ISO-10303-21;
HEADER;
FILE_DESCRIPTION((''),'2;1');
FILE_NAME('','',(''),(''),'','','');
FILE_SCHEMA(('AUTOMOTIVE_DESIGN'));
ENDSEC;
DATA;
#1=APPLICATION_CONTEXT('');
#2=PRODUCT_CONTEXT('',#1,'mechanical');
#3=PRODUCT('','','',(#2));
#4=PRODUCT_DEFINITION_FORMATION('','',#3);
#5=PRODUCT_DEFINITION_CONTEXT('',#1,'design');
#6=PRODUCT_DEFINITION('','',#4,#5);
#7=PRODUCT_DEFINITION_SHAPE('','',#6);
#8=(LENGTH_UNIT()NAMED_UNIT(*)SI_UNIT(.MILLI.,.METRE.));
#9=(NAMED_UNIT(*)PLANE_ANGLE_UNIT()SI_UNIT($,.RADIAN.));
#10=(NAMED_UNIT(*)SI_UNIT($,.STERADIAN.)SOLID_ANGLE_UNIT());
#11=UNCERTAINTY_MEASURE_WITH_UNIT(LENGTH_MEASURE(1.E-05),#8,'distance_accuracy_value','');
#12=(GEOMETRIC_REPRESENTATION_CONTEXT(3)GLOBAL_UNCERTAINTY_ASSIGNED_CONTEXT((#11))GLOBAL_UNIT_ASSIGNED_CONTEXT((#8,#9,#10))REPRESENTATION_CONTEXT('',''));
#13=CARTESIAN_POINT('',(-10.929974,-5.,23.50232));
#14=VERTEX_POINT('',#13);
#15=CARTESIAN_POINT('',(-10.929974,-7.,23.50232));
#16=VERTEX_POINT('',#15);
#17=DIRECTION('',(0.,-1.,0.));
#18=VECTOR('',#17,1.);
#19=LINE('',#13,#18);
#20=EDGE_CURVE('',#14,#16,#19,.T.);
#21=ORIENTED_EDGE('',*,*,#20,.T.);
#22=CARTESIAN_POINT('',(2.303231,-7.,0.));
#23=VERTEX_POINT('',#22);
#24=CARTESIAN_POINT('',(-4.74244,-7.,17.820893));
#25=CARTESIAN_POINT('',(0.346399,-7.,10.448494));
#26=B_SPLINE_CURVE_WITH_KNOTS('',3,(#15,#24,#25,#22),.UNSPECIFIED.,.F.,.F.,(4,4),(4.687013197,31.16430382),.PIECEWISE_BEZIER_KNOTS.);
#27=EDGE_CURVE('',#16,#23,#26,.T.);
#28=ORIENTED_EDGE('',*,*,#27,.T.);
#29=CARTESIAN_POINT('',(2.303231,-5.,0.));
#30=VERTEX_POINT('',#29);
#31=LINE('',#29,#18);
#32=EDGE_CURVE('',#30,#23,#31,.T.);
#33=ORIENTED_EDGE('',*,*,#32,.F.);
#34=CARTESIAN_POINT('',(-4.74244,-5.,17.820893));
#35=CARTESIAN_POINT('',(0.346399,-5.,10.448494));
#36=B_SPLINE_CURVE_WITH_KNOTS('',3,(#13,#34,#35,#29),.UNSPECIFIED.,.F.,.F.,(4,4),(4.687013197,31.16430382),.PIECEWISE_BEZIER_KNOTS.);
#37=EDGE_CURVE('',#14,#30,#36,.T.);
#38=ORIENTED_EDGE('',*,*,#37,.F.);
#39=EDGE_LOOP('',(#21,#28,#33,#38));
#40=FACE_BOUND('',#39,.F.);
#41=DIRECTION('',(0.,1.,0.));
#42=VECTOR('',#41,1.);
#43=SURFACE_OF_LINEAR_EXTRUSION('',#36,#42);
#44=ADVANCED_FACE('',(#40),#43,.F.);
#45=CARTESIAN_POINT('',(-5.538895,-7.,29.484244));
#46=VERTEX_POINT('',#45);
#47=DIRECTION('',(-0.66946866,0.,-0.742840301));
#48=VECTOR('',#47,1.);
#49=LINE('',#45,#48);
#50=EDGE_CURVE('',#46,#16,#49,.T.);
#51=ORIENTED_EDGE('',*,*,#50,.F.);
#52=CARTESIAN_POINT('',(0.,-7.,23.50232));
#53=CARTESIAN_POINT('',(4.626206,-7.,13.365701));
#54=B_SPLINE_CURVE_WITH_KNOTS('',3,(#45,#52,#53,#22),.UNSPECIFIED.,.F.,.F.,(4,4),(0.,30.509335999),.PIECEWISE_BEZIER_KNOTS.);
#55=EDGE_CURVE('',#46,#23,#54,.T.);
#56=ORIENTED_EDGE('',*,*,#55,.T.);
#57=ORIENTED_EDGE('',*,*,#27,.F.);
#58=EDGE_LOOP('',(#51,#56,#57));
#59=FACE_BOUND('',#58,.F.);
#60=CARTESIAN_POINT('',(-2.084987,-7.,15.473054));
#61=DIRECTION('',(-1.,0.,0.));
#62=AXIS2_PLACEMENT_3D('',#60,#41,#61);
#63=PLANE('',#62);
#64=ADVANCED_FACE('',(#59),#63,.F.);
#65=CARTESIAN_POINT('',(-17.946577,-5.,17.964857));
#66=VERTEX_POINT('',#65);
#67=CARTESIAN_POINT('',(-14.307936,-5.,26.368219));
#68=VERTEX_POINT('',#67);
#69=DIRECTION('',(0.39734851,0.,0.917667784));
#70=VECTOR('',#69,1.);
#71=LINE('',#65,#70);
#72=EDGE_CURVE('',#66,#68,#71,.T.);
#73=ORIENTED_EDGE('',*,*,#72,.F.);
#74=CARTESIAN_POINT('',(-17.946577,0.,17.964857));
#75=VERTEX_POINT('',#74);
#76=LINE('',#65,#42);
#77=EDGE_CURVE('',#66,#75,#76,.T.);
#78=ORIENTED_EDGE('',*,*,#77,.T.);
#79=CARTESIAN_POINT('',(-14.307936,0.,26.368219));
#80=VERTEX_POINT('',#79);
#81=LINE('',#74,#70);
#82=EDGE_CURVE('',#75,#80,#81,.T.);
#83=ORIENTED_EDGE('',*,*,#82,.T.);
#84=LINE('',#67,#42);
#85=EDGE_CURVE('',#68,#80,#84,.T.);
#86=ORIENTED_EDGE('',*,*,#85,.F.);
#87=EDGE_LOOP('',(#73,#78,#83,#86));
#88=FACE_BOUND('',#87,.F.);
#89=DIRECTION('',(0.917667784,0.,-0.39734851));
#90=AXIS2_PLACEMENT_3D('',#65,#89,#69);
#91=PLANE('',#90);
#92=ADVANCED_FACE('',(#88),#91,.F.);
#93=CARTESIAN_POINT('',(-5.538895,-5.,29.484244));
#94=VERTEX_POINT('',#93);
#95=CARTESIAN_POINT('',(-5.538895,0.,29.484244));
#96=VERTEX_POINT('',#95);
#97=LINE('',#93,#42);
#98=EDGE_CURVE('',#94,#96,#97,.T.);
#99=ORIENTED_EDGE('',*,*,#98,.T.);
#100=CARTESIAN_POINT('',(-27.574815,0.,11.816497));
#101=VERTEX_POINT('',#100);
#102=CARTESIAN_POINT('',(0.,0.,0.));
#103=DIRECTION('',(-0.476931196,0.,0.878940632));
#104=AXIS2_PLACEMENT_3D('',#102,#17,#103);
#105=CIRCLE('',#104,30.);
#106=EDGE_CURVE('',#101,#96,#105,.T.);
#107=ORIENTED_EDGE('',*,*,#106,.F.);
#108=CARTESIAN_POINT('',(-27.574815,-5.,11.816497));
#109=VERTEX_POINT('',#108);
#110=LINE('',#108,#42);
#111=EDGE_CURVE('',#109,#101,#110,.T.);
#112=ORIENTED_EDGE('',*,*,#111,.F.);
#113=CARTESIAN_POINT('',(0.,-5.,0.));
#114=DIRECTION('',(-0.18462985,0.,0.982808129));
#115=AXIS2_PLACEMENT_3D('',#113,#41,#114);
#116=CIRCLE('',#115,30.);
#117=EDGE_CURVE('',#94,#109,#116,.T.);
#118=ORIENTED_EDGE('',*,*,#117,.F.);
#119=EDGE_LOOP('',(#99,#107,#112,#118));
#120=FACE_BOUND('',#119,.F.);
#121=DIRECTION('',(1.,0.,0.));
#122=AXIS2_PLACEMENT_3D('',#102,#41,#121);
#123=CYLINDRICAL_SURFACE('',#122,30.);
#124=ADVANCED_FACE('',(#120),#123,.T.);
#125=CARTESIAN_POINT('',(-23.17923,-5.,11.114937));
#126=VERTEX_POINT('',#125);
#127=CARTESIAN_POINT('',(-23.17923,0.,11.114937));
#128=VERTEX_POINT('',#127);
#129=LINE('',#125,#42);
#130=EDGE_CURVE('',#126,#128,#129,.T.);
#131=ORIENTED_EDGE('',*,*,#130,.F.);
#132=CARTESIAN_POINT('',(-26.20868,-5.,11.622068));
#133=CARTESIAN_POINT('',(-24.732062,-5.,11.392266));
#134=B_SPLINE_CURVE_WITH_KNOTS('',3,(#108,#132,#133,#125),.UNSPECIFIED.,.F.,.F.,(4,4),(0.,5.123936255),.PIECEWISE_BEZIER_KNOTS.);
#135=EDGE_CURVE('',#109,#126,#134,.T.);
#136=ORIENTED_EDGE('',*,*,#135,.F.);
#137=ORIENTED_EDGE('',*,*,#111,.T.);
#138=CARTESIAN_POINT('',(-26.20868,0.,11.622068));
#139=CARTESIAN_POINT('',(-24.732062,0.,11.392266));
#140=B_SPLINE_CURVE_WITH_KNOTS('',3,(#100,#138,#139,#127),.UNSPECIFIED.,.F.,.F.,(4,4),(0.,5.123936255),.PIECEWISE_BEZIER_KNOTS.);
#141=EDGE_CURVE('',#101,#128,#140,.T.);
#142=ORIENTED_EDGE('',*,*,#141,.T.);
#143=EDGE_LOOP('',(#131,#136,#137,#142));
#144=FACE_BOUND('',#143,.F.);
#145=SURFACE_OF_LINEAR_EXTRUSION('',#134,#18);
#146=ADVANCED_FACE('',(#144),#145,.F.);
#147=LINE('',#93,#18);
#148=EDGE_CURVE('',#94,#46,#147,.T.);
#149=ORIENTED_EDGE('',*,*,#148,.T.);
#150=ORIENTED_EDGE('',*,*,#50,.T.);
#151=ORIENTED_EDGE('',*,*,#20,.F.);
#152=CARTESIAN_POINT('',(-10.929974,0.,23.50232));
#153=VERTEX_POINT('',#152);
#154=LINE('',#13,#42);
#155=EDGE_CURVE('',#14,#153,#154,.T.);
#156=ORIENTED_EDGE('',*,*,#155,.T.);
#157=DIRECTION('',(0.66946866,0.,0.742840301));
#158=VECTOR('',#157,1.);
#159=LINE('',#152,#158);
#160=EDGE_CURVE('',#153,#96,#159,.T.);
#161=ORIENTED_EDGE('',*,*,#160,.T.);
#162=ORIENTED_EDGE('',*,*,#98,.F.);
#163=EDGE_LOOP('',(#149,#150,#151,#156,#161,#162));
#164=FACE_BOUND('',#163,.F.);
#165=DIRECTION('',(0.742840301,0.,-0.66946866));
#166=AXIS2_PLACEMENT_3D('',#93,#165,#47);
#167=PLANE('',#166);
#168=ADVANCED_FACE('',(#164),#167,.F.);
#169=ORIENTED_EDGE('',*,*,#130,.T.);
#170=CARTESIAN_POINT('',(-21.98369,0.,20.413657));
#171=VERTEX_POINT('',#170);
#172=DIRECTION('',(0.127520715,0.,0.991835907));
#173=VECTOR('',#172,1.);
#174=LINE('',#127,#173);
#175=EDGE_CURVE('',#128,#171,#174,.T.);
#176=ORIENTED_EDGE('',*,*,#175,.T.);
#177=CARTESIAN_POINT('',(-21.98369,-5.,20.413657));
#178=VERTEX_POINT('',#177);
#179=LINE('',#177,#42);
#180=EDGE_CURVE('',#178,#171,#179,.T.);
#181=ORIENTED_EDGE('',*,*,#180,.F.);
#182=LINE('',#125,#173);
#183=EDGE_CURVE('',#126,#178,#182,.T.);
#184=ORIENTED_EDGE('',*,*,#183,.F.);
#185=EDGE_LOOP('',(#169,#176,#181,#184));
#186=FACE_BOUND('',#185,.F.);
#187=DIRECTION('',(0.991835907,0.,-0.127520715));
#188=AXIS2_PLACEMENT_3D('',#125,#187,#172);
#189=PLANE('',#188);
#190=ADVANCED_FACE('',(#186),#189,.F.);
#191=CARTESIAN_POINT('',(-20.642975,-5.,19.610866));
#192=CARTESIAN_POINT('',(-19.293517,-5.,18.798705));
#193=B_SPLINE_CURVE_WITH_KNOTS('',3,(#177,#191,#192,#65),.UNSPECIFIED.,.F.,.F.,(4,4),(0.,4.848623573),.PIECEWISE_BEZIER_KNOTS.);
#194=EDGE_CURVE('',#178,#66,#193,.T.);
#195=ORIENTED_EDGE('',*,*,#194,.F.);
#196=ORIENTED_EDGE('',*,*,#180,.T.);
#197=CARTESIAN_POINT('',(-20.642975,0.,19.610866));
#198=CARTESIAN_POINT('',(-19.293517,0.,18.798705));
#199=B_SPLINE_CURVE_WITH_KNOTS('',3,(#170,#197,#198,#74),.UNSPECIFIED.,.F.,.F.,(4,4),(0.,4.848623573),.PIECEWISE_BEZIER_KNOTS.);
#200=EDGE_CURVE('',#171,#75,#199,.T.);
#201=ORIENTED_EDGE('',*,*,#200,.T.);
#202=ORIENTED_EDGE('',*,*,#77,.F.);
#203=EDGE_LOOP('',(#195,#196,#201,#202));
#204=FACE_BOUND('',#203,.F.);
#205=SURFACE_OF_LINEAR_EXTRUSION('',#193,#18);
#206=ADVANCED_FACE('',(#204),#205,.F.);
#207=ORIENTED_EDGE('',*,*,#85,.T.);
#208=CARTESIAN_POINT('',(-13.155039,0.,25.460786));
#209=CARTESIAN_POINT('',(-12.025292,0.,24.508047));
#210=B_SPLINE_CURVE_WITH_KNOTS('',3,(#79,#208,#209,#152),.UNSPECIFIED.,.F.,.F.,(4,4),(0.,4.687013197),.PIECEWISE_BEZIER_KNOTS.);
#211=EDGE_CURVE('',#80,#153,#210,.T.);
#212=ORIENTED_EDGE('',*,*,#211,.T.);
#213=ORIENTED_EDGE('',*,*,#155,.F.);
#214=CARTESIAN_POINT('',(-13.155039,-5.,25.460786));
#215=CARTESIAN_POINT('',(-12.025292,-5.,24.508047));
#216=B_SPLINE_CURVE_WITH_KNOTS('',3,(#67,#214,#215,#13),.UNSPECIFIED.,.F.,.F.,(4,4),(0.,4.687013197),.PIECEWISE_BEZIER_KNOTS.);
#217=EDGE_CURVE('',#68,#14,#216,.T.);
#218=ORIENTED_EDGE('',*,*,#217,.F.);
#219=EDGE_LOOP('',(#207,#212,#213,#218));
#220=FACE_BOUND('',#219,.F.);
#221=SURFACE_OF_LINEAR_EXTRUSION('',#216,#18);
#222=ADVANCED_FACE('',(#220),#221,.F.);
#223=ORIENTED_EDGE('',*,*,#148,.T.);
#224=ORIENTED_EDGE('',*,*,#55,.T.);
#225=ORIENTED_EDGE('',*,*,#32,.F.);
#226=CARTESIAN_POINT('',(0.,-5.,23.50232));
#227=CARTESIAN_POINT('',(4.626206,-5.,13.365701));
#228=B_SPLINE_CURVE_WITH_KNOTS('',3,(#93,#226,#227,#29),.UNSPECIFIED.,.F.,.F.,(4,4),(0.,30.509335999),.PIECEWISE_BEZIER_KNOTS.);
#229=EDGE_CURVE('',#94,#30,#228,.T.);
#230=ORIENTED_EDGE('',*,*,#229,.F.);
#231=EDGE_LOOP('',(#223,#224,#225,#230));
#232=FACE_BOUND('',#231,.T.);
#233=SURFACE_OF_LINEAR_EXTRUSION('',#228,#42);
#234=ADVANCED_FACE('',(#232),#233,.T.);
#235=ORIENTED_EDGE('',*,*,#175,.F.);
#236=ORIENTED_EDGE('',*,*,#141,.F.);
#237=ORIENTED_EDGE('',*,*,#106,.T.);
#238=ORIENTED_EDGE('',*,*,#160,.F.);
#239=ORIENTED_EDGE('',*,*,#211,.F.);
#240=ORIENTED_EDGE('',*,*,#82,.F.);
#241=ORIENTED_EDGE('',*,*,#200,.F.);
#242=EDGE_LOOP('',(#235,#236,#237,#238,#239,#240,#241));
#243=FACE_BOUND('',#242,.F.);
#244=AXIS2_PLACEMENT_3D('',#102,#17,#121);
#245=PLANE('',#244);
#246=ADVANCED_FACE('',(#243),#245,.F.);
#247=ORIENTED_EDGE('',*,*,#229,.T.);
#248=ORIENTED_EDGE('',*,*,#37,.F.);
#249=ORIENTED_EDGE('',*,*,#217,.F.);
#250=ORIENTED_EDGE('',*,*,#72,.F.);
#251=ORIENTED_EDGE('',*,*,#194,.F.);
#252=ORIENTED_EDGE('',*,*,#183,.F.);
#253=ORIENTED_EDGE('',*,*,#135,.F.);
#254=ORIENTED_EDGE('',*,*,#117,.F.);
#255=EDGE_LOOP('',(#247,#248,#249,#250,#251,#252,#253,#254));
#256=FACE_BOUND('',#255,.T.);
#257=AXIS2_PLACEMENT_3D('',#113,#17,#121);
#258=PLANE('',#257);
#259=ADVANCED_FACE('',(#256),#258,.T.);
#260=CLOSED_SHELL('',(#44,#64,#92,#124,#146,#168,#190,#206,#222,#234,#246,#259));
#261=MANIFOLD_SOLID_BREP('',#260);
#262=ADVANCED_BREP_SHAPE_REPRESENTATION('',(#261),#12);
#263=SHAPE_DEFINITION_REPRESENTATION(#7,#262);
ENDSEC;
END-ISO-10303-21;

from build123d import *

# Parameters (mm, degrees)
F0_R     = 30
F1_DEPTH = 5
F4_DEPTH = 5
F5_DEPTH = 5
F6_DEPTH = 5
F7_DEPTH = 2


with BuildPart() as f1:
    # F0 (on Front) → F1 (new body)
    with BuildSketch(Plane.XZ):
        Circle(F0_R)
    extrude(amount=F1_DEPTH)

    # F3 (on face) → F4 (cut)
    with BuildSketch(Plane.XZ.offset(5)):
        with BuildLine():
            Line((-10.9299741999, 23.5023200512), (-5.5388955, 29.4842438709))
            ThreePointArc((-5.5388955, 29.4842438709), (-10.0449779303, 28.2683288926), (-14.3079358656, 26.3682189627))
            add(Edge.make_bspline(
                [(-14.3079358656, 26.3682189627), (-13.1550391421, 25.4607855158), (-12.0252922437, 24.5080470289), (-10.9299741999, 23.5023200512)],
                knots=[0, 0, 0, 0, 4.6870131966, 4.6870131966, 4.6870131966, 4.6870131966], degree=3))
        make_face()
    extrude(amount=-F4_DEPTH, mode=Mode.SUBTRACT)

    # F3 (on face) → F5 (cut)
    with BuildSketch(Plane.XZ.offset(5)):
        with BuildLine():
            Line((-17.9465766996, 17.9648566991), (-14.3079358656, 26.3682189627))
            ThreePointArc((-14.3079358656, 26.3682189627), (-18.3884401049, 23.7036974016), (-21.9836899596, 20.4136565995))
            add(Edge.make_bspline(
                [(-21.9836899596, 20.4136565995), (-20.642975191, 19.610865703), (-19.293517456, 18.7987052228), (-17.9465766996, 17.9648566991)],
                knots=[0, 0, 0, 0, 4.8486235733, 4.8486235733, 4.8486235733, 4.8486235733], degree=3))
        make_face()
    extrude(amount=-F5_DEPTH, mode=Mode.SUBTRACT)

    # F3 (on face) → F6 (cut)
    with BuildSketch(Plane.XZ.offset(5)):
        with BuildLine():
            Line((-23.1792298082, 11.114937143), (-21.9836899596, 20.4136565995))
            ThreePointArc((-21.9836899596, 20.4136565995), (-25.1493367192, 16.3557593094), (-27.5748147519, 11.8164965789))
            add(Edge.make_bspline(
                [(-27.5748147519, 11.8164965789), (-26.208679714, 11.6220681724), (-24.7320616466, 11.3922656282), (-23.1792298082, 11.114937143)],
                knots=[0, 0, 0, 0, 5.1239362549, 5.1239362549, 5.1239362549, 5.1239362549], degree=3))
        make_face()
    extrude(amount=-F6_DEPTH, mode=Mode.SUBTRACT)

    # F3 (on face) → F7 (join)
    with BuildSketch(Plane.XZ.offset(5)):
        with BuildLine():
            add(Edge.make_bspline(
                [(-5.5388955, 29.4842438709), (0, 23.5023200512), (4.6262064465, 13.365700841), (2.3032309004, 0)],
                knots=[0, 0, 0, 0, 30.5093359993, 30.5093359993, 30.5093359993, 30.5093359993], degree=3))
            Line((-5.5388955, 29.4842438709), (-10.9299741999, 23.5023200512))
            add(Edge.make_bspline(
                [(-10.9299741999, 23.5023200512), (-4.7424400597, 17.8208925919), (0.3463986774, 10.4484936531), (2.3032309004, 0)],
                knots=[4.6870131966, 4.6870131966, 4.6870131966, 4.6870131966, 31.1643038201, 31.1643038201, 31.1643038201, 31.1643038201], degree=3))
        make_face()
    extrude(amount=F7_DEPTH)


solid = f1.part
